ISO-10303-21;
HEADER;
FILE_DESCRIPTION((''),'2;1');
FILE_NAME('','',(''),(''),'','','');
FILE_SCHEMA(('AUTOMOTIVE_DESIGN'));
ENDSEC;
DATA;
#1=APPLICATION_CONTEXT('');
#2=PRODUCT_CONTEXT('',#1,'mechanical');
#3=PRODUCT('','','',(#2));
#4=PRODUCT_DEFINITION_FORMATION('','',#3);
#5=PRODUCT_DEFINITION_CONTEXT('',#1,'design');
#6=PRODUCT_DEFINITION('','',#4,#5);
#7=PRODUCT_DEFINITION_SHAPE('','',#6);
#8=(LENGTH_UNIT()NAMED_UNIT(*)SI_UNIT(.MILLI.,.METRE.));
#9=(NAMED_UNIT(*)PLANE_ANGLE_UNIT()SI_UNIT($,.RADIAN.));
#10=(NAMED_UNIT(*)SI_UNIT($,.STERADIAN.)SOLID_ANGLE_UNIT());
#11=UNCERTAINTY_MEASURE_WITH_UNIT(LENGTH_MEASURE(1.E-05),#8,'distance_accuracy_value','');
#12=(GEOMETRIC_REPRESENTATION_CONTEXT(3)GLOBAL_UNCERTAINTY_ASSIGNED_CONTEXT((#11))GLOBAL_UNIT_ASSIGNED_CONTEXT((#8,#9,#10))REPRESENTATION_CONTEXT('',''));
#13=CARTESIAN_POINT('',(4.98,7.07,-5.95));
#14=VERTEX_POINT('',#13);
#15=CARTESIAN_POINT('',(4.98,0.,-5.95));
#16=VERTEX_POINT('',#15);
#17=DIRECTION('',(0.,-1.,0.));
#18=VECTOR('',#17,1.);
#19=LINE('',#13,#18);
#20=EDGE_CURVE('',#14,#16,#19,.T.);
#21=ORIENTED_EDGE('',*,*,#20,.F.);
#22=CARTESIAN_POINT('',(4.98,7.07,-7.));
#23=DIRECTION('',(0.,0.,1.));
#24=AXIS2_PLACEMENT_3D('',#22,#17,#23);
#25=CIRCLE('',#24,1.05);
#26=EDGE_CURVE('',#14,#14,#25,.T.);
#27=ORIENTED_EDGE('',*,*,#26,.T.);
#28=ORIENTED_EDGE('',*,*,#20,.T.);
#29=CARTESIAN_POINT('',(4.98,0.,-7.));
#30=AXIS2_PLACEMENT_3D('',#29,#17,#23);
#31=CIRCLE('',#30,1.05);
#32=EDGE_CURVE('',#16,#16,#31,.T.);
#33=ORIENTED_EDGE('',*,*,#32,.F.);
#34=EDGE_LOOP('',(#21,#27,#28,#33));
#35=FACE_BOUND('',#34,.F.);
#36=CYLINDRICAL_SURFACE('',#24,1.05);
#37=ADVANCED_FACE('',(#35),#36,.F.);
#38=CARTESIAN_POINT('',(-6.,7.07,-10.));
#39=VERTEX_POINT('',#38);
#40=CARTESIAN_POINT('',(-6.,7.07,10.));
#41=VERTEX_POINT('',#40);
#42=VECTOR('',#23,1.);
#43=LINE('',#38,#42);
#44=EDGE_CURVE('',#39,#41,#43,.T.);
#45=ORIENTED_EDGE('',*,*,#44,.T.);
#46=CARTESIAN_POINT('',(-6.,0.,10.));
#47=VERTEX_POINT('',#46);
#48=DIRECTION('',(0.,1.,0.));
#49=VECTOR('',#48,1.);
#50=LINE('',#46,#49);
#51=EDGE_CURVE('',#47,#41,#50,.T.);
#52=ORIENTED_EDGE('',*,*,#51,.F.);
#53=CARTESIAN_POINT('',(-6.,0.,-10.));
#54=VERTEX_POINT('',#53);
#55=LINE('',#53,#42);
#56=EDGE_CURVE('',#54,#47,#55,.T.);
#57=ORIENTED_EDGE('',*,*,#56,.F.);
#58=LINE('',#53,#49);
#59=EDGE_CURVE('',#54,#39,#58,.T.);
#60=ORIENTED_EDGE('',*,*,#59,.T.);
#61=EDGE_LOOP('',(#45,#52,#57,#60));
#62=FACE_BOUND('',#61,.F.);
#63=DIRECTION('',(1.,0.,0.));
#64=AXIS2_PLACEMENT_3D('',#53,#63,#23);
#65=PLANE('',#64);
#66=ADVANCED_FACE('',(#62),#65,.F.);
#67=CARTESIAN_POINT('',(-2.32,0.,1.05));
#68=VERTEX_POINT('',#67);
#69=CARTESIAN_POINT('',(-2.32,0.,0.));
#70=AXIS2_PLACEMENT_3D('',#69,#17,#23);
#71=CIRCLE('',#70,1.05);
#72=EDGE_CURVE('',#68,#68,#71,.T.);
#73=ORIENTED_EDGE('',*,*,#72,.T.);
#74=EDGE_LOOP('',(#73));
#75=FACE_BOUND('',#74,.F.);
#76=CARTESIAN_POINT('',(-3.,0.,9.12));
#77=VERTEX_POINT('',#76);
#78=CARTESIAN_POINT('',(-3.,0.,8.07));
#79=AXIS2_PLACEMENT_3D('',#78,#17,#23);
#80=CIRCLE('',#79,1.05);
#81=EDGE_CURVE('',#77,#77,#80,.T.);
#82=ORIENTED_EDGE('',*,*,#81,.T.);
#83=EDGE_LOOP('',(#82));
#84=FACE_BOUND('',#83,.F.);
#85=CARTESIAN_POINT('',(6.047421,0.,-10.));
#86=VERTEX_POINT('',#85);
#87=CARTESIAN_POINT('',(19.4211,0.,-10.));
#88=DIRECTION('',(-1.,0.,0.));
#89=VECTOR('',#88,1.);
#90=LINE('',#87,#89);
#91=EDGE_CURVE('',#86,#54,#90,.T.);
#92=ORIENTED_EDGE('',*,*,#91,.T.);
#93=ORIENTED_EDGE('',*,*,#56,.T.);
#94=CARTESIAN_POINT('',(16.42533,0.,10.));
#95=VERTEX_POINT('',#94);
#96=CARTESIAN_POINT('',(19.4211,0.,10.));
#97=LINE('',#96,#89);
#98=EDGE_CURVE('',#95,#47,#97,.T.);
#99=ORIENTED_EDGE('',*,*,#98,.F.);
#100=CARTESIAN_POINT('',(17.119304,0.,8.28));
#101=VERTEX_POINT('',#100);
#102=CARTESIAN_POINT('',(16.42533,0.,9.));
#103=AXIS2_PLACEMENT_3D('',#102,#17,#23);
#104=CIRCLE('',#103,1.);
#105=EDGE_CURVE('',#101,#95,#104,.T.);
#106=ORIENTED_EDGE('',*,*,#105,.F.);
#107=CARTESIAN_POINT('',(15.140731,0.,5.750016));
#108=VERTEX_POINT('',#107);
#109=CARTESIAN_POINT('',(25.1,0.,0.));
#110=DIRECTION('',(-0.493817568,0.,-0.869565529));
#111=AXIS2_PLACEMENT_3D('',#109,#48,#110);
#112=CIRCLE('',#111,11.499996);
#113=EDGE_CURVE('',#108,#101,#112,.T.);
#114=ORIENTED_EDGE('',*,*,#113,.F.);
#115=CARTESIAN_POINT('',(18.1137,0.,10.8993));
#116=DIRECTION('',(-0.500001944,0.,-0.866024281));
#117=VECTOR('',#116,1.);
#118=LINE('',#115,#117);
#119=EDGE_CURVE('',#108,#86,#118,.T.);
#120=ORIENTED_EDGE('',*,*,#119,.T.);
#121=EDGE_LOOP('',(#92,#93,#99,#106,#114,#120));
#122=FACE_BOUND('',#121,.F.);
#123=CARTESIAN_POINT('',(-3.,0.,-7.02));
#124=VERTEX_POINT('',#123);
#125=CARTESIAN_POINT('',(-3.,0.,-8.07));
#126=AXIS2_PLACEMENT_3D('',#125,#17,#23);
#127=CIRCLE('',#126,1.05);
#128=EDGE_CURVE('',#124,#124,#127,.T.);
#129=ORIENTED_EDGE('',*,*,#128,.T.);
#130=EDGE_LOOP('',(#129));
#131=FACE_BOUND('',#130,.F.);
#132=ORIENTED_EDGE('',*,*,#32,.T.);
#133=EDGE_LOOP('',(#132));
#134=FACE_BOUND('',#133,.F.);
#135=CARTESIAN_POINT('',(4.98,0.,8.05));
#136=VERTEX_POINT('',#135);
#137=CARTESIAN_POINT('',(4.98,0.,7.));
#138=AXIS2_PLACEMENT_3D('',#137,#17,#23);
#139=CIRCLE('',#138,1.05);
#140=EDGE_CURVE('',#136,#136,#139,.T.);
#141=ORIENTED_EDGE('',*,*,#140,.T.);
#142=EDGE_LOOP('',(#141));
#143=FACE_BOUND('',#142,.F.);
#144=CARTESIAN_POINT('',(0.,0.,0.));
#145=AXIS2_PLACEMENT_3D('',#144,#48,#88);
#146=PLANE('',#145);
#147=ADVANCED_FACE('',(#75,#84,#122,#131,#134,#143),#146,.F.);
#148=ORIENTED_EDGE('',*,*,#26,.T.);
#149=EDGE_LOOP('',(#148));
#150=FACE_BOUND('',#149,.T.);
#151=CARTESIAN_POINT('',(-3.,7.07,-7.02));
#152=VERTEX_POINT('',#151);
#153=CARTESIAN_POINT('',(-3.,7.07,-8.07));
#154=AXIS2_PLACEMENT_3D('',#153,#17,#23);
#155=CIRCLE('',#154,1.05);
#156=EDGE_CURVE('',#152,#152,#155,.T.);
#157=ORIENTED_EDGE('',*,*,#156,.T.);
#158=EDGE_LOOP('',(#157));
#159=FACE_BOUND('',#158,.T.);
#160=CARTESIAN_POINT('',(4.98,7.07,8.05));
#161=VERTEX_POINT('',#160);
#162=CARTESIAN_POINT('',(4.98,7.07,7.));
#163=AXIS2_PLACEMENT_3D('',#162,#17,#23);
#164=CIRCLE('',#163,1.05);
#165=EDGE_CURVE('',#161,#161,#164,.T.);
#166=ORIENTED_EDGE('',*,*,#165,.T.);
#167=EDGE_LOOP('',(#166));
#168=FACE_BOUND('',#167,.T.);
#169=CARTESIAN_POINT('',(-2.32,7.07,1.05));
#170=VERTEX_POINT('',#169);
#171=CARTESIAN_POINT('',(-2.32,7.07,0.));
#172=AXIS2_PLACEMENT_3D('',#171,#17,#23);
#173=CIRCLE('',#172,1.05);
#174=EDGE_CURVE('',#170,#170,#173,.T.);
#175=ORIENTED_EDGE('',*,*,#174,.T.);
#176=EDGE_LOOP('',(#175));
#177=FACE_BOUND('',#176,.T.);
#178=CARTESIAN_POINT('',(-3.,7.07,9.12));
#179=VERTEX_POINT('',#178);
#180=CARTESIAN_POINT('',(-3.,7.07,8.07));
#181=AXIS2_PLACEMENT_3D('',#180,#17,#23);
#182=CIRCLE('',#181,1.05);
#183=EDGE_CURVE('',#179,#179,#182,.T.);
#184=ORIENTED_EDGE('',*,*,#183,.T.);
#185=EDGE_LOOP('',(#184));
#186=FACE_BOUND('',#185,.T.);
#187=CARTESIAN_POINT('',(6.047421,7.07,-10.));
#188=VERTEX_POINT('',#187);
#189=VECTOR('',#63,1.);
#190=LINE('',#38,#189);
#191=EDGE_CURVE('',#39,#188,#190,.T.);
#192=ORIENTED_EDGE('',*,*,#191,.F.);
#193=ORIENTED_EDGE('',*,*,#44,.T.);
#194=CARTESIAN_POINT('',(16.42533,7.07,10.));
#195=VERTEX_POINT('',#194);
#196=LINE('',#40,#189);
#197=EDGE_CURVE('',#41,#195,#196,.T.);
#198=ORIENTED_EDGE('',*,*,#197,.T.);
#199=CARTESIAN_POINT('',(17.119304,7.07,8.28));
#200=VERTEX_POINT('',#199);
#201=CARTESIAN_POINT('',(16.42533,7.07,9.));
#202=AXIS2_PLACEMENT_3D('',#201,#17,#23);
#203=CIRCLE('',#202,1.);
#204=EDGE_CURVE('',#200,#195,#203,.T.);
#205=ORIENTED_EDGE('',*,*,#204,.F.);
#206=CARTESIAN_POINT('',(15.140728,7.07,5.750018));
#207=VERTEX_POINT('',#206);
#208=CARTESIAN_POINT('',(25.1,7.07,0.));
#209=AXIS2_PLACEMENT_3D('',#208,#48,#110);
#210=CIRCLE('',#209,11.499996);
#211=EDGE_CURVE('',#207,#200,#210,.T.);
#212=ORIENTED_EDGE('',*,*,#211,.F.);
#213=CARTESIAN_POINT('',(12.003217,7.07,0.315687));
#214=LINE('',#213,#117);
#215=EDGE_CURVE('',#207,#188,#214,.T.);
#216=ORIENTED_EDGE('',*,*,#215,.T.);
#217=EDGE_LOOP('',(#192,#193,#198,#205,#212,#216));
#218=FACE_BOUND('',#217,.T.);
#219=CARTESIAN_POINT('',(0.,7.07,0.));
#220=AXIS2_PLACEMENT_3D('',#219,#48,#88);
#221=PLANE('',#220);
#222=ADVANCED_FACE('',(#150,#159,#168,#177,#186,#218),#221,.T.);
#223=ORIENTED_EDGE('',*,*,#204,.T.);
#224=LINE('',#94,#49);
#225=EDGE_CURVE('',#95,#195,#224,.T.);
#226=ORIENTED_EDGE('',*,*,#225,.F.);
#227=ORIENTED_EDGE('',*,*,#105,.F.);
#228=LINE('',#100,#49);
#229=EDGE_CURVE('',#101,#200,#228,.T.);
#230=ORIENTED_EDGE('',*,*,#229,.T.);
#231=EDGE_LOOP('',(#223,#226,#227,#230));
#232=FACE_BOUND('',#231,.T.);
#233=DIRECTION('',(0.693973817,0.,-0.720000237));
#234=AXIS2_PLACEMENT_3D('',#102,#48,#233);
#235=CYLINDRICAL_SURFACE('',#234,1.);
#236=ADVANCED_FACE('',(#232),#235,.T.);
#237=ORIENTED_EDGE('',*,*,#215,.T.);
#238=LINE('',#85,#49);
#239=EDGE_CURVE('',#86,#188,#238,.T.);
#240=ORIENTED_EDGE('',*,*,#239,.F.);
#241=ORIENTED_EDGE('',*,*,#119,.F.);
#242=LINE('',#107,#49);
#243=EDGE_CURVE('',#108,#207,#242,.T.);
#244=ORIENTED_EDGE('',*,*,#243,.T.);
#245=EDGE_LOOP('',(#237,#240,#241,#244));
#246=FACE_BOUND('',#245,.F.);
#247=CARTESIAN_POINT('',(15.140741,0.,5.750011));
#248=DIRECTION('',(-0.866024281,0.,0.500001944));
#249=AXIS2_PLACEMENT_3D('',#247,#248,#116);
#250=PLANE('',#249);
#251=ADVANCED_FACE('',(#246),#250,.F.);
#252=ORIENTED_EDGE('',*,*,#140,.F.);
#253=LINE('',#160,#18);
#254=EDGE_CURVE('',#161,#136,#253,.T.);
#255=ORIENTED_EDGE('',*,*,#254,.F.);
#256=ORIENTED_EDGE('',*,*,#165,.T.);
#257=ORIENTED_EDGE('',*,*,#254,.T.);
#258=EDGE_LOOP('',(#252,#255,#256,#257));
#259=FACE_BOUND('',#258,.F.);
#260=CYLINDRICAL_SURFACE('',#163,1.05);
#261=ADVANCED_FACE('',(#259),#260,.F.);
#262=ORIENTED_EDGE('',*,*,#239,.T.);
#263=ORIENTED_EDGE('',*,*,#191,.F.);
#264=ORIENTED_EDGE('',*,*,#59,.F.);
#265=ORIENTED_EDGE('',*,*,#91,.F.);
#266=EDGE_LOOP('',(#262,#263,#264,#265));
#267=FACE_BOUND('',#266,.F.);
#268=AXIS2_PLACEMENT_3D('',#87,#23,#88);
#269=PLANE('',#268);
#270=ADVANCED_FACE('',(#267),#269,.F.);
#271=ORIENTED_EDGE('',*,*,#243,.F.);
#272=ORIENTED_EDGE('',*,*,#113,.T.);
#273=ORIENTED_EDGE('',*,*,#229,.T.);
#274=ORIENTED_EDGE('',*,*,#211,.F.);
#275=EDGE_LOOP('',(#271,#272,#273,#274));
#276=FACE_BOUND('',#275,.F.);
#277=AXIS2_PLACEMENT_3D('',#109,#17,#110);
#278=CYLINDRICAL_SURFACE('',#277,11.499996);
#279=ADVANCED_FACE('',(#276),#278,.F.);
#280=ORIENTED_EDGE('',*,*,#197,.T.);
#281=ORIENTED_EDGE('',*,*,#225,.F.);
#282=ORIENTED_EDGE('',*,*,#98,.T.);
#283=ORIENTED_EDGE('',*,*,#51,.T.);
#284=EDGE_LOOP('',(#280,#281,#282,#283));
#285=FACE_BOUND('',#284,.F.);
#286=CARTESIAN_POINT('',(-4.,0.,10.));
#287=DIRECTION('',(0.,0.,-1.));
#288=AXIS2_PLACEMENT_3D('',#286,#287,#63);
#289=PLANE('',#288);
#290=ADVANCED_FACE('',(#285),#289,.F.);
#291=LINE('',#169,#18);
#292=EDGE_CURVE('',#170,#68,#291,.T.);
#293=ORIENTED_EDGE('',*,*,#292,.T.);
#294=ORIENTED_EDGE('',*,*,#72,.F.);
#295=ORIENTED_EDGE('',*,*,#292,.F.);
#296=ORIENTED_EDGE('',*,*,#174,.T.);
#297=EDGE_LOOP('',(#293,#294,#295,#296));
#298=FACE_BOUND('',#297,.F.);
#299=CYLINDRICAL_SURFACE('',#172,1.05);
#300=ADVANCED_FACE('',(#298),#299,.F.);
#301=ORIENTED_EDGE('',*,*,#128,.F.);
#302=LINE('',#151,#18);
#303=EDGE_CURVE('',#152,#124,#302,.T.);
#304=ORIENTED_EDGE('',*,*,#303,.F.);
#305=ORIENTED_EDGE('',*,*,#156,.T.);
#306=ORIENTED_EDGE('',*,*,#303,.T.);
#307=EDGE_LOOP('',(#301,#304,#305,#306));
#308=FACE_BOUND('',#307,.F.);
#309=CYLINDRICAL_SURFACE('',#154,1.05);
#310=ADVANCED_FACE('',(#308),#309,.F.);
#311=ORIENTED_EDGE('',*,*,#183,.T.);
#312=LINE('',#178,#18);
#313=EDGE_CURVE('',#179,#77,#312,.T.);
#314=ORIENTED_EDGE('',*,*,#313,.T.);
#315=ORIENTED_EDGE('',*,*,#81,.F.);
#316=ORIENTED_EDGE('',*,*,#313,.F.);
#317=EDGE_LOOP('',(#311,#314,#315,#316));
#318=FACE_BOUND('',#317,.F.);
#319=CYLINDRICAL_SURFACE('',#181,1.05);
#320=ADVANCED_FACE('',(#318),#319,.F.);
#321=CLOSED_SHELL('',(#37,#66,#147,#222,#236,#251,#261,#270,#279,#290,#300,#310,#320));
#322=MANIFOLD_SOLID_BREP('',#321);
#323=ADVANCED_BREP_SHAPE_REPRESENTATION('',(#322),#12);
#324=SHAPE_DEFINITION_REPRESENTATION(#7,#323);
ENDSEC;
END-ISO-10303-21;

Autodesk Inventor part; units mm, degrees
ref_plane "YZ Plane" through (0, 0, 0) normal (1, 0, 0) x (0, 1, 0)
ref_plane "XZ Plane" through (0, 0, 0) normal (0, 1, 0) x (-1, 0, 0)
ref_plane "XY Plane" through (0, 0, 0) normal (0, 0, 1) x (1, 0, 0)
sketch "Sketch1" plane through (0, 0, 0) normal (0, 1, 0) x (-1, 0, 0)
  line L0 (4, 10) -> (-19.4211, 10)
  line L1 (-19.4211, -10) -> (4, -10)
  line L2 (4, -10) -> (4, 10)
  arc A0 (-19.4211, -10) -> (-19.4211, 10) centre (-25.1, 0) ccw
  line L3 (4, -10) -> (6, -10)
  line L4 (6, -10) -> (6, 10)
  line L5 (6, 10) -> (4, 10)
  line L6 (4, 10) -> (4, -10)
  point P0 (0, 0)
  dimension "d0" = 20
  dimension "d2" = 4
  dimension "d3" = 10
  dimension "d6" = 10
  dimension "d7" = 23
  dimension "d8" = 29.1
  dimension "d11" = 23.4211
  dimension "d12" = 20
  dimension "d13" = 2
extrude "Extrusion1" add sketch "Sketch1" along normal blind 7.07
fillet "Fillet1" radius 1 2 edges at (19.4211, 3.535, 10) (19.4211, 3.535, -10)
sketch "Sketch2" plane through (0, 7.07, 0) normal (0, 1, 0) x (1, 0, 0)
  circle A0 centre (0.68, 0) radius 0.7835 projected
  circle A1 centre (7.98, -7) radius 0.7835 projected
  circle A2 centre (7.98, 7) radius 0.7835 projected
  circle A3 centre (0, -8.07) radius 0.7835 projected
  circle A4 centre (0, 8.07) radius 0.7835 projected
  circle A5 centre (-3, 8.07) radius 1.05
  circle A6 centre (4.98, 7) radius 1.05
  circle A7 centre (-2.32, 0) radius 1.05
  circle A8 centre (4.98, -7) radius 1.05
  circle A9 centre (-3, -8.07) radius 1.05
  point P0 (0, 0)
hole "Hole1" at (4.98, 7.07, 7) at (-2.32, 7.07, 0) at (-3, 7.07, 8.07) at (-3, 7.07, -8.07) at (4.98, 7.07, -7) direction (0, -1, 0) diameter 2.1 depth 7.07
sketch "Sketch3" plane through (0, 0, 0) normal (0, -1, 0) x (1, 0, 0)
  line L0 (18.1137, 10.8993) -> (3.779, -13.929)
  arc A0 (17.1193, 8.28) -> (17.1193, -8.28) centre (25.1, 0) ccw projected
  line L1 (16.4253, -10) -> (-6, -10) projected
  arc A1 (16.4253, -10) -> (17.1193, -8.28) centre (16.4253, -9) ccw projected
  point P0 (0, 0)
  point P1 (15.1407, 5.75)
  point P2 (6.0474, -10)
  dimension "d22" = 60
extrude "Extrusion2" cut sketch "Sketch3" against normal up to next
properties part number "3D_printed_part"
